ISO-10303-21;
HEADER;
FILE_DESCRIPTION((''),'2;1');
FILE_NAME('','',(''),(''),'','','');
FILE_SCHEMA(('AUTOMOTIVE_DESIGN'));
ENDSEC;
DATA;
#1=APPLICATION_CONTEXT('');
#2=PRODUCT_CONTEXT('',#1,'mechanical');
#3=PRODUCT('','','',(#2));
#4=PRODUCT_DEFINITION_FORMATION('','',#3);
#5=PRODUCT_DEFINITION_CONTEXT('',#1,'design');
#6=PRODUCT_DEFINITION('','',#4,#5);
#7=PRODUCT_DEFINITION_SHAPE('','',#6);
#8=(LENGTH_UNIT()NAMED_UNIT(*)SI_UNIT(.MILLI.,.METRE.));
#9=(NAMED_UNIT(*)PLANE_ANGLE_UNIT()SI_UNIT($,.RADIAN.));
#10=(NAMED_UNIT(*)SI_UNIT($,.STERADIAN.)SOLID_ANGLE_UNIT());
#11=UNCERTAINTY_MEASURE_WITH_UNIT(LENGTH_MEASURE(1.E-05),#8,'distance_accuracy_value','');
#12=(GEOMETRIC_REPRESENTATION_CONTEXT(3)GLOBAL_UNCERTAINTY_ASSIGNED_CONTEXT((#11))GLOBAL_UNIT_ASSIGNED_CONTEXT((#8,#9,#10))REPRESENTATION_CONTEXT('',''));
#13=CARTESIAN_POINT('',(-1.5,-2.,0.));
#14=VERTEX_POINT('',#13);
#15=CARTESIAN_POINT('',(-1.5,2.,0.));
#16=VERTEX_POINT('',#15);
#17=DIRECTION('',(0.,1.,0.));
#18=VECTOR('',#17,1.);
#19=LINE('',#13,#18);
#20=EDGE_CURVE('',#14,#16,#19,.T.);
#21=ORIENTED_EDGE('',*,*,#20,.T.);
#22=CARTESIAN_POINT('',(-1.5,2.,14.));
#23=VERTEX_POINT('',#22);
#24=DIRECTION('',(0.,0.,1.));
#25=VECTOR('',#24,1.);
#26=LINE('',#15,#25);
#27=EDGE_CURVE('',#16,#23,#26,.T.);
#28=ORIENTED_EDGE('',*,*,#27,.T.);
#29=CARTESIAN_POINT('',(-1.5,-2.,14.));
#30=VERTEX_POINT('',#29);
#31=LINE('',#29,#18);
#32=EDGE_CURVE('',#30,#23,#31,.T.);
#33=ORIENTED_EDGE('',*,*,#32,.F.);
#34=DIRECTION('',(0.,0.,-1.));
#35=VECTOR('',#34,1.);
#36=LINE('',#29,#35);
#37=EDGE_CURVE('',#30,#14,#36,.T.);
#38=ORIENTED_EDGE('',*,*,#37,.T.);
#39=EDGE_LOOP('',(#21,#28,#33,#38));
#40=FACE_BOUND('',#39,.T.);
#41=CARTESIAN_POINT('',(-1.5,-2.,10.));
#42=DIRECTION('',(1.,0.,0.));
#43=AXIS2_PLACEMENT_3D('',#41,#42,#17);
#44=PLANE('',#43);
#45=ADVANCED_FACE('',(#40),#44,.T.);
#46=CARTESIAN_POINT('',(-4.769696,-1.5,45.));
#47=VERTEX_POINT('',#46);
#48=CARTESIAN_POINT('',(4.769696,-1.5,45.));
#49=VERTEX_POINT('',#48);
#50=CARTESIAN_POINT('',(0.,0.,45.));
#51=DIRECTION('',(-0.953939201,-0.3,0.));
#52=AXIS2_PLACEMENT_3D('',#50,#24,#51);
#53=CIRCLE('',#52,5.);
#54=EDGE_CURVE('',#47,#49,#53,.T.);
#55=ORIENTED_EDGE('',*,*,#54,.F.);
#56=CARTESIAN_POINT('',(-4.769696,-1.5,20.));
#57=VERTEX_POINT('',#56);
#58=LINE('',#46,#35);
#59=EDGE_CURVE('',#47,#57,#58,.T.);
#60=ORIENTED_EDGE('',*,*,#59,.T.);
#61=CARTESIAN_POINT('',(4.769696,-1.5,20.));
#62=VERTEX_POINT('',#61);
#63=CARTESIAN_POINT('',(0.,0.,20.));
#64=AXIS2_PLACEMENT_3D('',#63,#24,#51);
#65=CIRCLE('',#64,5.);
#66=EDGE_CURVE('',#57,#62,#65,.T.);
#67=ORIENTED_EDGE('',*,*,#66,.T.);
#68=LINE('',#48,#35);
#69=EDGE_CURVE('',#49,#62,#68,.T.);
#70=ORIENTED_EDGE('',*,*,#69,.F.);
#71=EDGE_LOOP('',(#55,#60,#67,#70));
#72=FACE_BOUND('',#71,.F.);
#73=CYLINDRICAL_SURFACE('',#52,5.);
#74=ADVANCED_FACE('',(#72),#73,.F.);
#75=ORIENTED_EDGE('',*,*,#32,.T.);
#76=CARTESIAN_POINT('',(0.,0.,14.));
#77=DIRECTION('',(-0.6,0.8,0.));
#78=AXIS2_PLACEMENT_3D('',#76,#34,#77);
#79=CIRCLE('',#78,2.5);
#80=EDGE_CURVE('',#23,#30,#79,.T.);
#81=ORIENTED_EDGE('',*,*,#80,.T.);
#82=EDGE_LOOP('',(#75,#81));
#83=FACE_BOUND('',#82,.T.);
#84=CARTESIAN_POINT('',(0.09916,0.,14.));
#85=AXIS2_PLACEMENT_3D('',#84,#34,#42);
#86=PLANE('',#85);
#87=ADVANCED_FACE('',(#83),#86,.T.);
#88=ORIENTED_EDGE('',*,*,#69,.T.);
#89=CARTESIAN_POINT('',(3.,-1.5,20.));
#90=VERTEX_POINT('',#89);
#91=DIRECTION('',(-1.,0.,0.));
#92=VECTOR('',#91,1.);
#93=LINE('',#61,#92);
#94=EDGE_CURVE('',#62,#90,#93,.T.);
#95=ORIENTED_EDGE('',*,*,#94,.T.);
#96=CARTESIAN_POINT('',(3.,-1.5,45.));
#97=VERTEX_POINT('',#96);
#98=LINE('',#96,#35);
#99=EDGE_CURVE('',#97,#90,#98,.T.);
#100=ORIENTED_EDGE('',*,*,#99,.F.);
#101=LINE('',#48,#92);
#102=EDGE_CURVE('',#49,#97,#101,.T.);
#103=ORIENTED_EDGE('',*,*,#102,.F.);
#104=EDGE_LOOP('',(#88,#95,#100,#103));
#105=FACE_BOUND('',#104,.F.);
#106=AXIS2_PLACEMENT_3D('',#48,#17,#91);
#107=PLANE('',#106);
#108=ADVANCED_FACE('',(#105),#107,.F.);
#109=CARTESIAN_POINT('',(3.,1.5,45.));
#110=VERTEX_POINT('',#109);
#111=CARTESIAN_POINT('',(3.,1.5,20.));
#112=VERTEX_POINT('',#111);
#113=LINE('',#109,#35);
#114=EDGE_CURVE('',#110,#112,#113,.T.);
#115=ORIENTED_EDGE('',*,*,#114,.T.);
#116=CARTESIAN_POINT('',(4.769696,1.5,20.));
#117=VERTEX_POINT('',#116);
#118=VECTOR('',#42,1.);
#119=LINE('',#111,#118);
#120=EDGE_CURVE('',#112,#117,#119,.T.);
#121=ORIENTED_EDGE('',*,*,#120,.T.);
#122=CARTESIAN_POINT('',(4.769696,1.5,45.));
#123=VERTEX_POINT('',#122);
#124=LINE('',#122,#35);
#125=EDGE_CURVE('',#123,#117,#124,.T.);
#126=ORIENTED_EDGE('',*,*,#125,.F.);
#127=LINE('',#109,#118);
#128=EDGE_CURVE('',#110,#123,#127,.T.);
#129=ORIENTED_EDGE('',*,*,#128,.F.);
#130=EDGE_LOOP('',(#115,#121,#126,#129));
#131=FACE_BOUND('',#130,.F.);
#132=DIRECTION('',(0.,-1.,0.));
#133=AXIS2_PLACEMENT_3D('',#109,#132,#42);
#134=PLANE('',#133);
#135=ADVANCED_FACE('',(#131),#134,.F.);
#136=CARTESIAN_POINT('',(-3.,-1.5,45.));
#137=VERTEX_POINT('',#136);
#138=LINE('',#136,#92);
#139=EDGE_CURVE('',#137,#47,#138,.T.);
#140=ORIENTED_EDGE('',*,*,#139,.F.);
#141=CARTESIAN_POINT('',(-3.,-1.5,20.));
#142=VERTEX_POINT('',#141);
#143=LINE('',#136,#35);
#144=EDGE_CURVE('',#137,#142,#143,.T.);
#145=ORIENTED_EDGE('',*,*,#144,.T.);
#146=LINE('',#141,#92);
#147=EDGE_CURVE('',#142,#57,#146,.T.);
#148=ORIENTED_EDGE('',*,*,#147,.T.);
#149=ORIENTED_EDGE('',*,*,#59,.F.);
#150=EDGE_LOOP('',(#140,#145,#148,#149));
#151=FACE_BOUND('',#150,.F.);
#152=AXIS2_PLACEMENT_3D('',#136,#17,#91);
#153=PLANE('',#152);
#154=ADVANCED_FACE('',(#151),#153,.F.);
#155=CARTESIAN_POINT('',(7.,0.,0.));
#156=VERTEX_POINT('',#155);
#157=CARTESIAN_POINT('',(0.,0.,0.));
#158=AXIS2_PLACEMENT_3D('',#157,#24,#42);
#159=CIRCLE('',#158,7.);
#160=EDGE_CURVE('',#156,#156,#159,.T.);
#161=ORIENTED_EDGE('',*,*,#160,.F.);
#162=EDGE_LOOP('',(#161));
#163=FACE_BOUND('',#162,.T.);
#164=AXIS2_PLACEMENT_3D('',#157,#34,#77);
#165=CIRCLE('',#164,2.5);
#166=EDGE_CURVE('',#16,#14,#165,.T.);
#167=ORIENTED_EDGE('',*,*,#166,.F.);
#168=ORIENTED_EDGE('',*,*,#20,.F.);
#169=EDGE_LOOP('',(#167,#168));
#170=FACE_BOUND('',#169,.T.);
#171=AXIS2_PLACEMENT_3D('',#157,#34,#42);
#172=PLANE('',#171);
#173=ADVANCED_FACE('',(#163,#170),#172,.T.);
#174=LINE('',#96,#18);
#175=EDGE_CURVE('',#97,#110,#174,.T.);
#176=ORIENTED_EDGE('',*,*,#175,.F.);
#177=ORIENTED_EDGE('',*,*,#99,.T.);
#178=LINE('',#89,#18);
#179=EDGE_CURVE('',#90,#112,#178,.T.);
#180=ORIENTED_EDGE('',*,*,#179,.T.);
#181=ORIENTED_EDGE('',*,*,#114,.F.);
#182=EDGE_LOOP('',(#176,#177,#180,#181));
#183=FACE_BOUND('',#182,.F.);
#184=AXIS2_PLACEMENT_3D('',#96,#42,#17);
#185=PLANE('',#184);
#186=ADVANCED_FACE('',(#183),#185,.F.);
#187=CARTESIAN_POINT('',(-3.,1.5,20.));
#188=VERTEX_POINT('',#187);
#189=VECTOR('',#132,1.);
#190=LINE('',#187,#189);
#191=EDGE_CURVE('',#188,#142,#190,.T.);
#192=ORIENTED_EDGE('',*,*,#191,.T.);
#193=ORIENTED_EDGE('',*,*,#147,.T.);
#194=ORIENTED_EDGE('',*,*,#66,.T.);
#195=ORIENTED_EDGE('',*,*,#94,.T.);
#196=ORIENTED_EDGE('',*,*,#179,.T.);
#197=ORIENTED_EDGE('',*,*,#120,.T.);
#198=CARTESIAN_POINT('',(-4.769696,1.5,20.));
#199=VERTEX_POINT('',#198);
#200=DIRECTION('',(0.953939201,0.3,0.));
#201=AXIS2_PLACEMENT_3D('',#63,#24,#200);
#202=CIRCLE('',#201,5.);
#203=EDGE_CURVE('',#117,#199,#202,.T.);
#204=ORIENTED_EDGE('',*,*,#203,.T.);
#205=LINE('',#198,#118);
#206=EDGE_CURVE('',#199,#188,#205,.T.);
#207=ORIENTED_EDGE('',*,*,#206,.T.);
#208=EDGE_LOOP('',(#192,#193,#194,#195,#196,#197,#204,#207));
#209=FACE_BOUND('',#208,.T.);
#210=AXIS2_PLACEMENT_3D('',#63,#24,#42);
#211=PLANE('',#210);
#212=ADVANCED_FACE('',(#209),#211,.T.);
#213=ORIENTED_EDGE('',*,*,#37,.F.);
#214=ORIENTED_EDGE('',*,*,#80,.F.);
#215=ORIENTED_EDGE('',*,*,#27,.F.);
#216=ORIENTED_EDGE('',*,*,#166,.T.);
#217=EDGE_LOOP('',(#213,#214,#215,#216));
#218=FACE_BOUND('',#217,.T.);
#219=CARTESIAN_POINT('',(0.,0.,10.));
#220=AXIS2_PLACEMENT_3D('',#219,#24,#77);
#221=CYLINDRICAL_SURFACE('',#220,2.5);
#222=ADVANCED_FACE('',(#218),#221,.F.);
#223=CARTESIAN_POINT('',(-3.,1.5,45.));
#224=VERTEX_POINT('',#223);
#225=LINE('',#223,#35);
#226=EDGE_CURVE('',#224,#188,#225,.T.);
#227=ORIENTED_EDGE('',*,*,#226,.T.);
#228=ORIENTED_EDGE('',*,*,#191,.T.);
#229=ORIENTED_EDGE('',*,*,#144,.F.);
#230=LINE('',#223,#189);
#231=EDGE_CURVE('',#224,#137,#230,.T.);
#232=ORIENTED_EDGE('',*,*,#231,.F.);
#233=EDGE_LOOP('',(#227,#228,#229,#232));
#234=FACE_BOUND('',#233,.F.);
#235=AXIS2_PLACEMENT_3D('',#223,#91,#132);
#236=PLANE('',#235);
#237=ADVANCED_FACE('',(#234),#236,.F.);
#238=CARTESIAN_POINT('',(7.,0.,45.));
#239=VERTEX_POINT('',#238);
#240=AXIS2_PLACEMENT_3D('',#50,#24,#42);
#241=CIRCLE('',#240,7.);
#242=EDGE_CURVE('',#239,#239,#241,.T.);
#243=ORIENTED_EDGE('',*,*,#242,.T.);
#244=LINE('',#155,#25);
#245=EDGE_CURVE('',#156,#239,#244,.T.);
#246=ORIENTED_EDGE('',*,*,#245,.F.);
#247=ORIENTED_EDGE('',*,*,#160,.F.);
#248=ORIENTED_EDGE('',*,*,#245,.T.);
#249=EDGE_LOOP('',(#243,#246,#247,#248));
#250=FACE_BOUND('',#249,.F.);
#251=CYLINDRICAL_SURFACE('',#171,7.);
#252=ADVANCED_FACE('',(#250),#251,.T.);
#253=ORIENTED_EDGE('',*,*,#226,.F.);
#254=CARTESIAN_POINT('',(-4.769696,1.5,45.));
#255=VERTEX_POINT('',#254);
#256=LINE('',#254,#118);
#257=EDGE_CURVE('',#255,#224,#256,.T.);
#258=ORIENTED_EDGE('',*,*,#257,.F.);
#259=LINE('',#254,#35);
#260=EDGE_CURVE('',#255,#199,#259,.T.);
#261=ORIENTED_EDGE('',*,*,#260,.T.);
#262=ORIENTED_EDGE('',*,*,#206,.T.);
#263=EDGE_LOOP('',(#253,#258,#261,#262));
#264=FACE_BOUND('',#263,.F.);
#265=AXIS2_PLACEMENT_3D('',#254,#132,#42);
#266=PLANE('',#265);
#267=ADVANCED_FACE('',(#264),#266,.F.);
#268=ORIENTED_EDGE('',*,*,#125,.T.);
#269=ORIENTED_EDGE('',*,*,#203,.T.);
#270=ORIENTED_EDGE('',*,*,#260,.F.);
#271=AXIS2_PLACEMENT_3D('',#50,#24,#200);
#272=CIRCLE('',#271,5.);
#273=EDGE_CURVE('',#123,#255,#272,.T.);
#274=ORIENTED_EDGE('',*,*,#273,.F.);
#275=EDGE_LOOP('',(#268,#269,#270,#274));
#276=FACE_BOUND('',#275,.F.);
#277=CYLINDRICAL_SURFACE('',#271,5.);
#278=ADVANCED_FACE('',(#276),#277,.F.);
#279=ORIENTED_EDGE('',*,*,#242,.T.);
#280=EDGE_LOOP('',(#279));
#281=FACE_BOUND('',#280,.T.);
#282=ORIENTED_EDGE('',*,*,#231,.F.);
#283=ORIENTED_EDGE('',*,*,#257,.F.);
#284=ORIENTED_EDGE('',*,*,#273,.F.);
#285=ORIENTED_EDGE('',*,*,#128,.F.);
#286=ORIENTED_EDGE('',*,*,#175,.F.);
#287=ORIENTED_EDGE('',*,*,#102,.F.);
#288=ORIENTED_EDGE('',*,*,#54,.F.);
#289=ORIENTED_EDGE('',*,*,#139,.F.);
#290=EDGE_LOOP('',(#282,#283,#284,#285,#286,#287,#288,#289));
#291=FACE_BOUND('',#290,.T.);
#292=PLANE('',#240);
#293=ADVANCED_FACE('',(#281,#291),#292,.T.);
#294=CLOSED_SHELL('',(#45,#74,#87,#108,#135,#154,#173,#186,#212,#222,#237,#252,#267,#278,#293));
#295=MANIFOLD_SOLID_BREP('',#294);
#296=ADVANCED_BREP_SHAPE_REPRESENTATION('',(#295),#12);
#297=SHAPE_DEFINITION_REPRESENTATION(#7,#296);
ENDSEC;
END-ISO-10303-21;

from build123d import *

# Parameters (mm, degrees)
F0_R     = 7
F1_DEPTH = 45
F3_DEPTH = 25
F4_R     = 2.55
F5_DEPTH = 10
F7_DEPTH = 4
F8_DEPTH = 10


with BuildPart() as f1:
    # F0 (on Top) → F1 (new body)
    with BuildSketch(Plane.XY):
        Circle(F0_R)
    extrude(amount=F1_DEPTH)

    # F2 (on face) → F3 (cut)
    with BuildSketch(Plane.XY.offset(45)):
        with BuildLine():
            ThreePointArc((4.7696960071, 1.5), (0, 5), (-4.7696960071, 1.5))
            Line((-4.7696960071, 1.5), (-3, 1.5))
            Line((-3, 1.5), (-3, -1.5))
            Line((-3, -1.5), (-4.7696960071, -1.5))
            ThreePointArc((-4.7696960071, -1.5), (0, -5), (4.7696960071, -1.5))
            Line((4.7696960071, -1.5), (3, -1.5))
            Line((3, -1.5), (3, 1.5))
            Line((3, 1.5), (4.7696960071, 1.5))
        make_face()
    extrude(amount=-F3_DEPTH, mode=Mode.SUBTRACT)

    # F4 (on face) → F5 (cut)
    with BuildSketch(Plane(origin=(0, 0, 0), x_dir=(1, 0, 0), z_dir=(0, 0, -1))):
        Circle(F4_R)
    extrude(amount=-F5_DEPTH, mode=Mode.SUBTRACT)

    # F6 (on face) → F7 (cut)
    with BuildSketch(Plane(origin=(0, 0, 10), x_dir=(1, 0, 0), z_dir=(0, 0, -1))):
        with BuildLine():
            Line((-1.5, 2), (-1.5, -2))
            ThreePointArc((-1.5, -2), (2.5, 0), (-1.5, 2))
        make_face()
    extrude(amount=-F7_DEPTH, mode=Mode.SUBTRACT)

    # F8 (add): a face of the model
    f8_faces = [f1.faces().sort_by_distance(p)[0] for p in [
        (-2.4778751083, 0, 10),
    ]]
    extrude(f8_faces, amount=F8_DEPTH)


solid = f1.part
